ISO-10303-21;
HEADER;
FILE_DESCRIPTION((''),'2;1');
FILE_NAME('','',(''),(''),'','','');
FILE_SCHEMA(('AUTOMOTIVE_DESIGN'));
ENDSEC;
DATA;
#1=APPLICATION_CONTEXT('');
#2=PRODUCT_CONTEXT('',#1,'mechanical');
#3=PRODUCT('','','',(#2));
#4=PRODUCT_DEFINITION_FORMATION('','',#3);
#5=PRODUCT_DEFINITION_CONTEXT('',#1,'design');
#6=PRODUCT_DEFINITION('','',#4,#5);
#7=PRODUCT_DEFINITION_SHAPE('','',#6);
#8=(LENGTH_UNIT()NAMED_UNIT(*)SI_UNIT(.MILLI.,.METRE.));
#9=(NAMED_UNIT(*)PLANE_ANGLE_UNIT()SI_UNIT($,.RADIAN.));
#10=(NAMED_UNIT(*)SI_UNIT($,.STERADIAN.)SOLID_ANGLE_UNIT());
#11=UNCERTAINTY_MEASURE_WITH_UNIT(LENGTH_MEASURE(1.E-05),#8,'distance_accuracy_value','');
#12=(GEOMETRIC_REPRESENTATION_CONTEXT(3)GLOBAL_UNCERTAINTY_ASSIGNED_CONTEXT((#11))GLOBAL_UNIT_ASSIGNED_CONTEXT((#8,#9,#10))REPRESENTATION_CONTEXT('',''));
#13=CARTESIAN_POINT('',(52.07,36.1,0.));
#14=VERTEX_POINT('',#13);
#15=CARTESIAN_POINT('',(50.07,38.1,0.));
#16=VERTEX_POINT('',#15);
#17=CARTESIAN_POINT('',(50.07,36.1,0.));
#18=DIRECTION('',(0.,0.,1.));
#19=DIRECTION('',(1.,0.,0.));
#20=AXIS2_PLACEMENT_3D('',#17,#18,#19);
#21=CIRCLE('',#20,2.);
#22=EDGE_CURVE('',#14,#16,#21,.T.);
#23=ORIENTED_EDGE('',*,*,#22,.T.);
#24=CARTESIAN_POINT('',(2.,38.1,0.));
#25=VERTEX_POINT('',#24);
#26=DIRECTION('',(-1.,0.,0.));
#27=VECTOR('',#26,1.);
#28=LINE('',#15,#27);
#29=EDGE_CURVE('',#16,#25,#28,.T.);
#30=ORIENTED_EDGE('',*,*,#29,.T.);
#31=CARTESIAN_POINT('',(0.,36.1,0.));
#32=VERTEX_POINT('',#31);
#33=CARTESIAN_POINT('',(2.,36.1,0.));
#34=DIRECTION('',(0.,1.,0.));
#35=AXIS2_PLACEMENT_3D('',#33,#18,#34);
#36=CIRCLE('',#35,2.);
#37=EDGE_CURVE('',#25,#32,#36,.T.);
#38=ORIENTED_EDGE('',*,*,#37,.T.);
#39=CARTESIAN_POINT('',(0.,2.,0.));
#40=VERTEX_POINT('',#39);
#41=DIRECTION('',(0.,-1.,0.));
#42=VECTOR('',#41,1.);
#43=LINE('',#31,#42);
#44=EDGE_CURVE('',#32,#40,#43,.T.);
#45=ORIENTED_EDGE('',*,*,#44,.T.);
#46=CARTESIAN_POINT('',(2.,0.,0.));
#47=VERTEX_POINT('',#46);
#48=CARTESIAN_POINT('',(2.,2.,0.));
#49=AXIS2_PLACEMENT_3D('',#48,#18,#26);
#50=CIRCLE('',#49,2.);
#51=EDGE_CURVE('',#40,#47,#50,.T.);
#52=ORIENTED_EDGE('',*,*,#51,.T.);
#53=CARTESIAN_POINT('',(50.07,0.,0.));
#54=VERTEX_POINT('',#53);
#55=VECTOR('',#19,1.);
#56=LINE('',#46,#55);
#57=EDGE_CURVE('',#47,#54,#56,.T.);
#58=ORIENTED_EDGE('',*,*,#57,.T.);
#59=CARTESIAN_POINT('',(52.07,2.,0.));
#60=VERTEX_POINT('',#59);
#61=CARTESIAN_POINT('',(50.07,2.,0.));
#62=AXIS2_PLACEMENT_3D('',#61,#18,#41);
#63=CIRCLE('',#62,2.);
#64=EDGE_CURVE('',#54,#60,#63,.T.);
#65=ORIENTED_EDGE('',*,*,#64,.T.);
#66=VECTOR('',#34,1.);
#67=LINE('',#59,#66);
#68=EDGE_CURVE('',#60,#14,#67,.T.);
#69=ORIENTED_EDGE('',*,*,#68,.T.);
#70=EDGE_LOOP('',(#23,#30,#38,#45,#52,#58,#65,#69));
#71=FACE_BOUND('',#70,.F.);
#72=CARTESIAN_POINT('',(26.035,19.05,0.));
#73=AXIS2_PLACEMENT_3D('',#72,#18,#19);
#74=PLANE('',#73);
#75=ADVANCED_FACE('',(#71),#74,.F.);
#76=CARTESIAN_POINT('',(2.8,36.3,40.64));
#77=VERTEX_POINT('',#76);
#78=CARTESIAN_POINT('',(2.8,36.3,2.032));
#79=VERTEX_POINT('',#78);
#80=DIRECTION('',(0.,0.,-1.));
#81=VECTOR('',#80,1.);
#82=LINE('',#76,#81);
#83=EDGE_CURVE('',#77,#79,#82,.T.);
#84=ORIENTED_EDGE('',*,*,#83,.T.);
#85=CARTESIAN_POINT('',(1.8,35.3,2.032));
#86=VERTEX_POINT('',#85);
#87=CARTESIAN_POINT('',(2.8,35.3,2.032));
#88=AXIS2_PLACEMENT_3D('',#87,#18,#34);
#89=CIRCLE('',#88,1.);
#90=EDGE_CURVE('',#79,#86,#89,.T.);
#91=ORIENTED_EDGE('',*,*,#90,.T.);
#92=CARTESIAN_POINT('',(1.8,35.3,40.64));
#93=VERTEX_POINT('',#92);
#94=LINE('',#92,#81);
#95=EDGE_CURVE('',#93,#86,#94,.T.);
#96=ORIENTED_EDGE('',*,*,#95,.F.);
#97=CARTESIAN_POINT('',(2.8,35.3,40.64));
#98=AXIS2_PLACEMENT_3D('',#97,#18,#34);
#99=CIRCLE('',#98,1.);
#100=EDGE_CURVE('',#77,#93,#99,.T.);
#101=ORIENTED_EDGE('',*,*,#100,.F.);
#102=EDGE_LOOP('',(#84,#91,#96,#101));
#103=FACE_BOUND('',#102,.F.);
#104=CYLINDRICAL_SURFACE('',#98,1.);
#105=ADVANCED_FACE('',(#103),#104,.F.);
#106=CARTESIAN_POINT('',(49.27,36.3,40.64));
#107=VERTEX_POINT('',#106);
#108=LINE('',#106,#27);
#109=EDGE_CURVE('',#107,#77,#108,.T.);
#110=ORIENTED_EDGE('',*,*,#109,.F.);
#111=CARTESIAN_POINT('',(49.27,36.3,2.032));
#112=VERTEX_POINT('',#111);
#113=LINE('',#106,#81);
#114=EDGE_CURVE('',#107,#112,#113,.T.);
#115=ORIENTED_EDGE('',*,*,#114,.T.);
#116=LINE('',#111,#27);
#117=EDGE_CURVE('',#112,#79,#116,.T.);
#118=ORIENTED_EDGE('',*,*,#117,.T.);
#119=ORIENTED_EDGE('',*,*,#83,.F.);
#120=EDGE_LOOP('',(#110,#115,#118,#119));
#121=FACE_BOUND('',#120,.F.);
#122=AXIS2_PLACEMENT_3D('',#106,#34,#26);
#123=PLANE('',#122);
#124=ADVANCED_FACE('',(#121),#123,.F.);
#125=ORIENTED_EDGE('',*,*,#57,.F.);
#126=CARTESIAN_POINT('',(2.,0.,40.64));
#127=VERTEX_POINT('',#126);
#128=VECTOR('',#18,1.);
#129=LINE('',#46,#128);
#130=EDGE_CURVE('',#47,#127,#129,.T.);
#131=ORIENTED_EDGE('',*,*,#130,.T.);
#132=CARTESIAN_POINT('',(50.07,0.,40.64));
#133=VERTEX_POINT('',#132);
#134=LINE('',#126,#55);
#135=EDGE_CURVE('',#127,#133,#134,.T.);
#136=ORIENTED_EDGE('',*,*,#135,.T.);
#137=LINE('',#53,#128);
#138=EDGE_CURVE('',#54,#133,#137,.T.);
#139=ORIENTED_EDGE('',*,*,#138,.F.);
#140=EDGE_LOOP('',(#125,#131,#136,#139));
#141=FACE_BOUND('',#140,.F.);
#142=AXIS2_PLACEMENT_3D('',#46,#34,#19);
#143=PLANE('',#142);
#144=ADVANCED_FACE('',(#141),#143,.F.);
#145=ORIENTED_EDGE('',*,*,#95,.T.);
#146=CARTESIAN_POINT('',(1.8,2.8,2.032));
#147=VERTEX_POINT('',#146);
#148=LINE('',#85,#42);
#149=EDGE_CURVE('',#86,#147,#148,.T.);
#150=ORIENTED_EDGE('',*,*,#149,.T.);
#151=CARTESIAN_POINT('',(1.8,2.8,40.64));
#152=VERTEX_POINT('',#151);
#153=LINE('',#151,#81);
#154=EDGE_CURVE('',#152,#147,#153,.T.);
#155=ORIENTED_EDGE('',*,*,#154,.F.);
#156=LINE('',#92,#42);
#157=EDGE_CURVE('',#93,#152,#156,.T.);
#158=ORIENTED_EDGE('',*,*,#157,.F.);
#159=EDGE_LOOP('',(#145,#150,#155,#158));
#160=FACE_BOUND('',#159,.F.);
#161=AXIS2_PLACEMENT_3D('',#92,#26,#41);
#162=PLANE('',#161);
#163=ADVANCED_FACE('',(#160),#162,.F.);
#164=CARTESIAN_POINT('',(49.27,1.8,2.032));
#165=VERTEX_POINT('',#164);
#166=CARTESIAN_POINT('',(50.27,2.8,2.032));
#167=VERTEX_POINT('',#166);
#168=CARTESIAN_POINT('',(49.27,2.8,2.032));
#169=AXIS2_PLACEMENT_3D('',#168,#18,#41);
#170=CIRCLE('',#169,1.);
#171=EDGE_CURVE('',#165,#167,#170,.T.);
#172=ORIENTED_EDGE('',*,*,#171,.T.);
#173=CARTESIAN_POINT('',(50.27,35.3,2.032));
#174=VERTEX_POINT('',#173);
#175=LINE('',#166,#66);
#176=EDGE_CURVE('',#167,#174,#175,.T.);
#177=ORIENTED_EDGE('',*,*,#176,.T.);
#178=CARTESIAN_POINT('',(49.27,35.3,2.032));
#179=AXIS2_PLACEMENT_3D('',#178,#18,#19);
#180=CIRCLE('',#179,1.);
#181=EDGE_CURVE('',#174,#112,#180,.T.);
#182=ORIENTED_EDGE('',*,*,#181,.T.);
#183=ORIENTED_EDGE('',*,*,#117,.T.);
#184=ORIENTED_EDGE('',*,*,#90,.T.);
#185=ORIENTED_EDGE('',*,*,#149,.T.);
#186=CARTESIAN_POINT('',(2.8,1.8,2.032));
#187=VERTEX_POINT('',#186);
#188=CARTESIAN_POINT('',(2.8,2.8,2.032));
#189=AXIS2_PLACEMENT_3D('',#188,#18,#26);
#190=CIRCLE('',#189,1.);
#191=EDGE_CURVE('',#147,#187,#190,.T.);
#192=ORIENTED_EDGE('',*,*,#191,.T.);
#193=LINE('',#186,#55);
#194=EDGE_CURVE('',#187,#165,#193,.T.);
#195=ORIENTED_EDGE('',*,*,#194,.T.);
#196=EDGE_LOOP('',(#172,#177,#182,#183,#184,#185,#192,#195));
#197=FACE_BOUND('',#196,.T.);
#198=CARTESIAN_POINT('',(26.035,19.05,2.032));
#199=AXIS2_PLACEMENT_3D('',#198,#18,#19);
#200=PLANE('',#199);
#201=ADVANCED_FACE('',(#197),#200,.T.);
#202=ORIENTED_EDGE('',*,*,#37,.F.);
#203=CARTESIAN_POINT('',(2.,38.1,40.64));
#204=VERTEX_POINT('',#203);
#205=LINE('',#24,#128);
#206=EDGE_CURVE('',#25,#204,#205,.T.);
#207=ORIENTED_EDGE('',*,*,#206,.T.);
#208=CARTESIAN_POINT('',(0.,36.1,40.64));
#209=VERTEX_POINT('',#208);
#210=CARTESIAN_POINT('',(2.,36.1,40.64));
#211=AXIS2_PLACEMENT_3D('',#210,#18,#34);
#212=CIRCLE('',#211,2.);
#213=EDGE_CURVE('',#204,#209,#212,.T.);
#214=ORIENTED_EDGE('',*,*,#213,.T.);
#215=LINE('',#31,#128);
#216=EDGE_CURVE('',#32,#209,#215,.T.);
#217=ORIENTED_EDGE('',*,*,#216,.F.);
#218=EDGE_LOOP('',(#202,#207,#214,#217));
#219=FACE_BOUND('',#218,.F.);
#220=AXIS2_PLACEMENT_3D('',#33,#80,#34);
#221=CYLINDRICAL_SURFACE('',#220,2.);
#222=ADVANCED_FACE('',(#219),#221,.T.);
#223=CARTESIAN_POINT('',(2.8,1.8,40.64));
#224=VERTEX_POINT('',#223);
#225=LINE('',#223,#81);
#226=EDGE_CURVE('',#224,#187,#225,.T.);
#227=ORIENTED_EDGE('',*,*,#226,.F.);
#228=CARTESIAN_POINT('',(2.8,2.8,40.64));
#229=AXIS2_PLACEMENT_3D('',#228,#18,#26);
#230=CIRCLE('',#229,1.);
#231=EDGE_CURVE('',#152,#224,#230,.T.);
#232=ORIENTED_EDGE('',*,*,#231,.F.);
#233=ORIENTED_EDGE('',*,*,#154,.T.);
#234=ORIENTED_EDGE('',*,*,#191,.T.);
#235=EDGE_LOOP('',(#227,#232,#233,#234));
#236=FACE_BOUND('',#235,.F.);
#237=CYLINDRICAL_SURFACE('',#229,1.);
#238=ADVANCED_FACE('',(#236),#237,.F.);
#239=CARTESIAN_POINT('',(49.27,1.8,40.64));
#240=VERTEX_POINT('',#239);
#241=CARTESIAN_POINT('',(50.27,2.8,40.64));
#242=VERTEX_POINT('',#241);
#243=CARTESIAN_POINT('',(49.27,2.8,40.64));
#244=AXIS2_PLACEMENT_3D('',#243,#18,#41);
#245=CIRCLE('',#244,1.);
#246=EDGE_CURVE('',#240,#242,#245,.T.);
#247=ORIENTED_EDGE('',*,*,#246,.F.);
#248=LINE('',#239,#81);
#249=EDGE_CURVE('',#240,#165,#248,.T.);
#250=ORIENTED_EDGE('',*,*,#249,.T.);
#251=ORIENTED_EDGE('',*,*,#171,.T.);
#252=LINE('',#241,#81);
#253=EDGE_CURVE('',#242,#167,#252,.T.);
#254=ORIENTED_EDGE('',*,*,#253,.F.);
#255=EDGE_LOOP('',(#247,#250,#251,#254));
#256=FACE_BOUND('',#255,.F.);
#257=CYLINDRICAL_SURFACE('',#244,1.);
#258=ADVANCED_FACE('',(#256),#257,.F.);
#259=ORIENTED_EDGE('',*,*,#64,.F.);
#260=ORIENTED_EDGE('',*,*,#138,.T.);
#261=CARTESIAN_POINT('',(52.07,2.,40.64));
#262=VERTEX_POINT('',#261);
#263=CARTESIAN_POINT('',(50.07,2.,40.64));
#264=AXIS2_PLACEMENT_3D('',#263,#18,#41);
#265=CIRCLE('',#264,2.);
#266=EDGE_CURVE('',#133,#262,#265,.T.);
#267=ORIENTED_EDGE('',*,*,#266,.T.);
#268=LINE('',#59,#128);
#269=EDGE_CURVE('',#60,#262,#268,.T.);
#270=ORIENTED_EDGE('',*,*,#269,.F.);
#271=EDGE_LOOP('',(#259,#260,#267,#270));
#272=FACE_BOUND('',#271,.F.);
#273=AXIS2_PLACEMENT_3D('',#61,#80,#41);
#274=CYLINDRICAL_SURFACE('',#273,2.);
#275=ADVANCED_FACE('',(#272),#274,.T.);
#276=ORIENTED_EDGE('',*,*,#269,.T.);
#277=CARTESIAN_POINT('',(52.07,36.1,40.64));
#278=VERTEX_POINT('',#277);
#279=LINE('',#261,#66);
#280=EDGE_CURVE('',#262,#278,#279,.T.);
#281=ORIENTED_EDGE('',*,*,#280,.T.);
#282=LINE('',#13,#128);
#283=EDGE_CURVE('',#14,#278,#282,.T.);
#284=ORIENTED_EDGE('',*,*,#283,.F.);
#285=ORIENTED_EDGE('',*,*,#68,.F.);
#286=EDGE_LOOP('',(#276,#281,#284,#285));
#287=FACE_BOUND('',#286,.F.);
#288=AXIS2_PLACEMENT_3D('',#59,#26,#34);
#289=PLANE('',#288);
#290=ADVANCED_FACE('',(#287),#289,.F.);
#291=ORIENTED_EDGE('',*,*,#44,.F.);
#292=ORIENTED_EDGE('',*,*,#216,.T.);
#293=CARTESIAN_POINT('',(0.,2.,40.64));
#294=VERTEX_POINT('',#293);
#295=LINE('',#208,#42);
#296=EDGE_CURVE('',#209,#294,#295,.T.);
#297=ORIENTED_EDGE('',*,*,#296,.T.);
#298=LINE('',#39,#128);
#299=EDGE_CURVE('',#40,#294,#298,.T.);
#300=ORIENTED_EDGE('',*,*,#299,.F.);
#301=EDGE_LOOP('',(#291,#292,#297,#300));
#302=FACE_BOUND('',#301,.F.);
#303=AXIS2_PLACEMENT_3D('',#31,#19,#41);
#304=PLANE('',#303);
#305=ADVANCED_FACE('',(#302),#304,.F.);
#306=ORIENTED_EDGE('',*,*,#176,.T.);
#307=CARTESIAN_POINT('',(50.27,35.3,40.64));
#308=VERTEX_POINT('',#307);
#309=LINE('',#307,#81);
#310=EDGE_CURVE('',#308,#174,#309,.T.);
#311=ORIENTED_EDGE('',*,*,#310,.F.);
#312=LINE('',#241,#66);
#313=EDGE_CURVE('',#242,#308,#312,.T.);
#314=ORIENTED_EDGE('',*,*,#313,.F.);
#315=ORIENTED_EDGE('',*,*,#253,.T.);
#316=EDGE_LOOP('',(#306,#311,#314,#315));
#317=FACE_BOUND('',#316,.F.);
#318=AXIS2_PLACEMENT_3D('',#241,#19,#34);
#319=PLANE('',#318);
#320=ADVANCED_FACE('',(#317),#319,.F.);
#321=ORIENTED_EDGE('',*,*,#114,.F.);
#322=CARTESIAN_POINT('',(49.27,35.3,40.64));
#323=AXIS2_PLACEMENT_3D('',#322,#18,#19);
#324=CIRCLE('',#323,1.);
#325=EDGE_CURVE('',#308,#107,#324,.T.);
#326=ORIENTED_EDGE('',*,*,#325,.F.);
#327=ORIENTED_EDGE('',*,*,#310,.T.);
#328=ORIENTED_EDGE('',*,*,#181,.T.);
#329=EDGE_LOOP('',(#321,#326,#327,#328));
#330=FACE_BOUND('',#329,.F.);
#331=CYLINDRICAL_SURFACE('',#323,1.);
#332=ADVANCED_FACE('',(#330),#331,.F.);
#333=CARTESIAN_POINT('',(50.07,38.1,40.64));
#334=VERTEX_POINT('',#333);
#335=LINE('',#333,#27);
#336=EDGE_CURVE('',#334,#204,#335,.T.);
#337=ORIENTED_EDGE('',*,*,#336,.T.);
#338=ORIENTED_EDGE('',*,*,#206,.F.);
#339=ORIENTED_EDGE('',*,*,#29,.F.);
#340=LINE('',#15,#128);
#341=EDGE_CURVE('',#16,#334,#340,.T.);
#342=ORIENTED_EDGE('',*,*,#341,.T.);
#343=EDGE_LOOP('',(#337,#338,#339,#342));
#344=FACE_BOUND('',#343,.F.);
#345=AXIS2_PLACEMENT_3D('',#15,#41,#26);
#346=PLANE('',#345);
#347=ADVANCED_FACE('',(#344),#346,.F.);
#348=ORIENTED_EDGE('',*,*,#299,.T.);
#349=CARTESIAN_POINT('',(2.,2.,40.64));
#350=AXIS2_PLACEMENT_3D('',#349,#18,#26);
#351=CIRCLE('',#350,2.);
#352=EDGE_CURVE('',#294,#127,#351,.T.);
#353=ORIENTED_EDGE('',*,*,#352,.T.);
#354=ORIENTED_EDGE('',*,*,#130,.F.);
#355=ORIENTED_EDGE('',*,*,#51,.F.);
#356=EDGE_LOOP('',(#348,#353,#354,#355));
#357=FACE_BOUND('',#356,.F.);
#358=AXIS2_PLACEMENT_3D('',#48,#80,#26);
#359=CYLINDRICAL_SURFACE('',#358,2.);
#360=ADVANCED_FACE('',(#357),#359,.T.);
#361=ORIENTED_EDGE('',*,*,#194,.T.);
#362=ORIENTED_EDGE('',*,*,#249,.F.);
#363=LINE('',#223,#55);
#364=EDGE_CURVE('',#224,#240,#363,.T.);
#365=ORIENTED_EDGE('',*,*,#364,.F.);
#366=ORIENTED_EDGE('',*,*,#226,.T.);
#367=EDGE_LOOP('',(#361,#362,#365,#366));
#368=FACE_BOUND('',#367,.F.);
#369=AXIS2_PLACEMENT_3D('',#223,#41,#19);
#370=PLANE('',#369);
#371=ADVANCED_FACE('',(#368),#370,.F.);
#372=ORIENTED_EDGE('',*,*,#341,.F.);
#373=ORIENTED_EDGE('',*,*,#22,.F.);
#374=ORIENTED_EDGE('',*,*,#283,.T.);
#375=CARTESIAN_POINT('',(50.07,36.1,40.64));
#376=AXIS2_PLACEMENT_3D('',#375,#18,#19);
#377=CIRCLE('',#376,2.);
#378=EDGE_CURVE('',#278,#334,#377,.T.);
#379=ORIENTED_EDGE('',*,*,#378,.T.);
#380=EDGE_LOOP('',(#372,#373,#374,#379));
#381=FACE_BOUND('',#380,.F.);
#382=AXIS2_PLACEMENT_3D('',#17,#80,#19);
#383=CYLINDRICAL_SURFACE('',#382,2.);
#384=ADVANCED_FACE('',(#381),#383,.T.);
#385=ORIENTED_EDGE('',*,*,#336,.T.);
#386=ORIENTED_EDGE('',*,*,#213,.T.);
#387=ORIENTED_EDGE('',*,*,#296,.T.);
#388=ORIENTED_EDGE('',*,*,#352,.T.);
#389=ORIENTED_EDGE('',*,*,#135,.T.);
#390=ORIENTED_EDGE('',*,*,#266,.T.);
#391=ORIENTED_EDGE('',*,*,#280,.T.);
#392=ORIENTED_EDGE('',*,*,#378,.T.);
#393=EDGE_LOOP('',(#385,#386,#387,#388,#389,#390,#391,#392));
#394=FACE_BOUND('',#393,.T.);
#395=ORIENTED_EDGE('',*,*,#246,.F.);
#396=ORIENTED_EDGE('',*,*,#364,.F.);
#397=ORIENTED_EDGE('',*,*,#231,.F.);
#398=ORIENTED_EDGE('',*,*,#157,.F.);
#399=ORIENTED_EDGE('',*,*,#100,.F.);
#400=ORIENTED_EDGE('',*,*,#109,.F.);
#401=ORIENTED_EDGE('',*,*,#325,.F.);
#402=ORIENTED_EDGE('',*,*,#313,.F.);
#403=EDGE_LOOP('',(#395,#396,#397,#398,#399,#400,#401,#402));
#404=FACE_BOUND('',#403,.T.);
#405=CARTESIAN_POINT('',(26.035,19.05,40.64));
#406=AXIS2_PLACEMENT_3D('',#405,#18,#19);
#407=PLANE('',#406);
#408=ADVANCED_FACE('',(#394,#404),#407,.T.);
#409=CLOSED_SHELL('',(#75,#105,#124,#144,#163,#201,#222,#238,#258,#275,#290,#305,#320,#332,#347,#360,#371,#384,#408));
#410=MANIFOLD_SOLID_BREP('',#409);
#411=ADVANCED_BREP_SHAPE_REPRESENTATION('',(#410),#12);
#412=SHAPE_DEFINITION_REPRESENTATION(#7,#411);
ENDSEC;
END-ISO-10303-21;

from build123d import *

# Parameters (mm, degrees)
F1_DEPTH = 40.64
F3_DEPTH = 38.608


# Not quite as in the source:
# - a feature names something its author has since deleted; it is built from what else it names


with BuildPart() as f1:
    # F0 (on Top) → F1 (new body)
    with BuildSketch(Plane.XY):
        with BuildLine():
            ThreePointArc((0, 2), (0.5857864376, 0.5857864376), (2, 0))
            Line((2, 0), (50.07, 0))
            ThreePointArc((50.07, 0), (51.4842135624, 0.5857864376), (52.07, 2))
            Line((52.07, 2), (52.07, 36.1))
            ThreePointArc((52.07, 36.1), (51.4842135624, 37.5142135624), (50.07, 38.1))
            Line((50.07, 38.1), (2, 38.1))
            ThreePointArc((2, 38.1), (0.5857864376, 37.5142135624), (0, 36.1))
            Line((0, 36.1), (0, 2))
        make_face()
    extrude(amount=F1_DEPTH)

    # F2 (on face) → F3 (cut)
    with BuildSketch(Plane.XY.offset(40.64)):
        with BuildLine():
            Line((49.27, 36.3), (2.8, 36.3))
            ThreePointArc((2.8, 36.3), (2.0928932188, 36.0071067812), (1.8, 35.3))
            Line((1.8, 35.3), (1.8, 2.8))
            ThreePointArc((1.8, 2.8), (2.0928932188, 2.0928932188), (2.8, 1.8))
            Line((2.8, 1.8), (49.27, 1.8))
            ThreePointArc((49.27, 1.8), (49.9771067812, 2.0928932188), (50.27, 2.8))
            Line((50.27, 2.8), (50.27, 35.3))
            ThreePointArc((50.27, 35.3), (49.9771067812, 36.0071067812), (49.27, 36.3))
        make_face()
    extrude(amount=-F3_DEPTH, mode=Mode.SUBTRACT)


solid = f1.part
